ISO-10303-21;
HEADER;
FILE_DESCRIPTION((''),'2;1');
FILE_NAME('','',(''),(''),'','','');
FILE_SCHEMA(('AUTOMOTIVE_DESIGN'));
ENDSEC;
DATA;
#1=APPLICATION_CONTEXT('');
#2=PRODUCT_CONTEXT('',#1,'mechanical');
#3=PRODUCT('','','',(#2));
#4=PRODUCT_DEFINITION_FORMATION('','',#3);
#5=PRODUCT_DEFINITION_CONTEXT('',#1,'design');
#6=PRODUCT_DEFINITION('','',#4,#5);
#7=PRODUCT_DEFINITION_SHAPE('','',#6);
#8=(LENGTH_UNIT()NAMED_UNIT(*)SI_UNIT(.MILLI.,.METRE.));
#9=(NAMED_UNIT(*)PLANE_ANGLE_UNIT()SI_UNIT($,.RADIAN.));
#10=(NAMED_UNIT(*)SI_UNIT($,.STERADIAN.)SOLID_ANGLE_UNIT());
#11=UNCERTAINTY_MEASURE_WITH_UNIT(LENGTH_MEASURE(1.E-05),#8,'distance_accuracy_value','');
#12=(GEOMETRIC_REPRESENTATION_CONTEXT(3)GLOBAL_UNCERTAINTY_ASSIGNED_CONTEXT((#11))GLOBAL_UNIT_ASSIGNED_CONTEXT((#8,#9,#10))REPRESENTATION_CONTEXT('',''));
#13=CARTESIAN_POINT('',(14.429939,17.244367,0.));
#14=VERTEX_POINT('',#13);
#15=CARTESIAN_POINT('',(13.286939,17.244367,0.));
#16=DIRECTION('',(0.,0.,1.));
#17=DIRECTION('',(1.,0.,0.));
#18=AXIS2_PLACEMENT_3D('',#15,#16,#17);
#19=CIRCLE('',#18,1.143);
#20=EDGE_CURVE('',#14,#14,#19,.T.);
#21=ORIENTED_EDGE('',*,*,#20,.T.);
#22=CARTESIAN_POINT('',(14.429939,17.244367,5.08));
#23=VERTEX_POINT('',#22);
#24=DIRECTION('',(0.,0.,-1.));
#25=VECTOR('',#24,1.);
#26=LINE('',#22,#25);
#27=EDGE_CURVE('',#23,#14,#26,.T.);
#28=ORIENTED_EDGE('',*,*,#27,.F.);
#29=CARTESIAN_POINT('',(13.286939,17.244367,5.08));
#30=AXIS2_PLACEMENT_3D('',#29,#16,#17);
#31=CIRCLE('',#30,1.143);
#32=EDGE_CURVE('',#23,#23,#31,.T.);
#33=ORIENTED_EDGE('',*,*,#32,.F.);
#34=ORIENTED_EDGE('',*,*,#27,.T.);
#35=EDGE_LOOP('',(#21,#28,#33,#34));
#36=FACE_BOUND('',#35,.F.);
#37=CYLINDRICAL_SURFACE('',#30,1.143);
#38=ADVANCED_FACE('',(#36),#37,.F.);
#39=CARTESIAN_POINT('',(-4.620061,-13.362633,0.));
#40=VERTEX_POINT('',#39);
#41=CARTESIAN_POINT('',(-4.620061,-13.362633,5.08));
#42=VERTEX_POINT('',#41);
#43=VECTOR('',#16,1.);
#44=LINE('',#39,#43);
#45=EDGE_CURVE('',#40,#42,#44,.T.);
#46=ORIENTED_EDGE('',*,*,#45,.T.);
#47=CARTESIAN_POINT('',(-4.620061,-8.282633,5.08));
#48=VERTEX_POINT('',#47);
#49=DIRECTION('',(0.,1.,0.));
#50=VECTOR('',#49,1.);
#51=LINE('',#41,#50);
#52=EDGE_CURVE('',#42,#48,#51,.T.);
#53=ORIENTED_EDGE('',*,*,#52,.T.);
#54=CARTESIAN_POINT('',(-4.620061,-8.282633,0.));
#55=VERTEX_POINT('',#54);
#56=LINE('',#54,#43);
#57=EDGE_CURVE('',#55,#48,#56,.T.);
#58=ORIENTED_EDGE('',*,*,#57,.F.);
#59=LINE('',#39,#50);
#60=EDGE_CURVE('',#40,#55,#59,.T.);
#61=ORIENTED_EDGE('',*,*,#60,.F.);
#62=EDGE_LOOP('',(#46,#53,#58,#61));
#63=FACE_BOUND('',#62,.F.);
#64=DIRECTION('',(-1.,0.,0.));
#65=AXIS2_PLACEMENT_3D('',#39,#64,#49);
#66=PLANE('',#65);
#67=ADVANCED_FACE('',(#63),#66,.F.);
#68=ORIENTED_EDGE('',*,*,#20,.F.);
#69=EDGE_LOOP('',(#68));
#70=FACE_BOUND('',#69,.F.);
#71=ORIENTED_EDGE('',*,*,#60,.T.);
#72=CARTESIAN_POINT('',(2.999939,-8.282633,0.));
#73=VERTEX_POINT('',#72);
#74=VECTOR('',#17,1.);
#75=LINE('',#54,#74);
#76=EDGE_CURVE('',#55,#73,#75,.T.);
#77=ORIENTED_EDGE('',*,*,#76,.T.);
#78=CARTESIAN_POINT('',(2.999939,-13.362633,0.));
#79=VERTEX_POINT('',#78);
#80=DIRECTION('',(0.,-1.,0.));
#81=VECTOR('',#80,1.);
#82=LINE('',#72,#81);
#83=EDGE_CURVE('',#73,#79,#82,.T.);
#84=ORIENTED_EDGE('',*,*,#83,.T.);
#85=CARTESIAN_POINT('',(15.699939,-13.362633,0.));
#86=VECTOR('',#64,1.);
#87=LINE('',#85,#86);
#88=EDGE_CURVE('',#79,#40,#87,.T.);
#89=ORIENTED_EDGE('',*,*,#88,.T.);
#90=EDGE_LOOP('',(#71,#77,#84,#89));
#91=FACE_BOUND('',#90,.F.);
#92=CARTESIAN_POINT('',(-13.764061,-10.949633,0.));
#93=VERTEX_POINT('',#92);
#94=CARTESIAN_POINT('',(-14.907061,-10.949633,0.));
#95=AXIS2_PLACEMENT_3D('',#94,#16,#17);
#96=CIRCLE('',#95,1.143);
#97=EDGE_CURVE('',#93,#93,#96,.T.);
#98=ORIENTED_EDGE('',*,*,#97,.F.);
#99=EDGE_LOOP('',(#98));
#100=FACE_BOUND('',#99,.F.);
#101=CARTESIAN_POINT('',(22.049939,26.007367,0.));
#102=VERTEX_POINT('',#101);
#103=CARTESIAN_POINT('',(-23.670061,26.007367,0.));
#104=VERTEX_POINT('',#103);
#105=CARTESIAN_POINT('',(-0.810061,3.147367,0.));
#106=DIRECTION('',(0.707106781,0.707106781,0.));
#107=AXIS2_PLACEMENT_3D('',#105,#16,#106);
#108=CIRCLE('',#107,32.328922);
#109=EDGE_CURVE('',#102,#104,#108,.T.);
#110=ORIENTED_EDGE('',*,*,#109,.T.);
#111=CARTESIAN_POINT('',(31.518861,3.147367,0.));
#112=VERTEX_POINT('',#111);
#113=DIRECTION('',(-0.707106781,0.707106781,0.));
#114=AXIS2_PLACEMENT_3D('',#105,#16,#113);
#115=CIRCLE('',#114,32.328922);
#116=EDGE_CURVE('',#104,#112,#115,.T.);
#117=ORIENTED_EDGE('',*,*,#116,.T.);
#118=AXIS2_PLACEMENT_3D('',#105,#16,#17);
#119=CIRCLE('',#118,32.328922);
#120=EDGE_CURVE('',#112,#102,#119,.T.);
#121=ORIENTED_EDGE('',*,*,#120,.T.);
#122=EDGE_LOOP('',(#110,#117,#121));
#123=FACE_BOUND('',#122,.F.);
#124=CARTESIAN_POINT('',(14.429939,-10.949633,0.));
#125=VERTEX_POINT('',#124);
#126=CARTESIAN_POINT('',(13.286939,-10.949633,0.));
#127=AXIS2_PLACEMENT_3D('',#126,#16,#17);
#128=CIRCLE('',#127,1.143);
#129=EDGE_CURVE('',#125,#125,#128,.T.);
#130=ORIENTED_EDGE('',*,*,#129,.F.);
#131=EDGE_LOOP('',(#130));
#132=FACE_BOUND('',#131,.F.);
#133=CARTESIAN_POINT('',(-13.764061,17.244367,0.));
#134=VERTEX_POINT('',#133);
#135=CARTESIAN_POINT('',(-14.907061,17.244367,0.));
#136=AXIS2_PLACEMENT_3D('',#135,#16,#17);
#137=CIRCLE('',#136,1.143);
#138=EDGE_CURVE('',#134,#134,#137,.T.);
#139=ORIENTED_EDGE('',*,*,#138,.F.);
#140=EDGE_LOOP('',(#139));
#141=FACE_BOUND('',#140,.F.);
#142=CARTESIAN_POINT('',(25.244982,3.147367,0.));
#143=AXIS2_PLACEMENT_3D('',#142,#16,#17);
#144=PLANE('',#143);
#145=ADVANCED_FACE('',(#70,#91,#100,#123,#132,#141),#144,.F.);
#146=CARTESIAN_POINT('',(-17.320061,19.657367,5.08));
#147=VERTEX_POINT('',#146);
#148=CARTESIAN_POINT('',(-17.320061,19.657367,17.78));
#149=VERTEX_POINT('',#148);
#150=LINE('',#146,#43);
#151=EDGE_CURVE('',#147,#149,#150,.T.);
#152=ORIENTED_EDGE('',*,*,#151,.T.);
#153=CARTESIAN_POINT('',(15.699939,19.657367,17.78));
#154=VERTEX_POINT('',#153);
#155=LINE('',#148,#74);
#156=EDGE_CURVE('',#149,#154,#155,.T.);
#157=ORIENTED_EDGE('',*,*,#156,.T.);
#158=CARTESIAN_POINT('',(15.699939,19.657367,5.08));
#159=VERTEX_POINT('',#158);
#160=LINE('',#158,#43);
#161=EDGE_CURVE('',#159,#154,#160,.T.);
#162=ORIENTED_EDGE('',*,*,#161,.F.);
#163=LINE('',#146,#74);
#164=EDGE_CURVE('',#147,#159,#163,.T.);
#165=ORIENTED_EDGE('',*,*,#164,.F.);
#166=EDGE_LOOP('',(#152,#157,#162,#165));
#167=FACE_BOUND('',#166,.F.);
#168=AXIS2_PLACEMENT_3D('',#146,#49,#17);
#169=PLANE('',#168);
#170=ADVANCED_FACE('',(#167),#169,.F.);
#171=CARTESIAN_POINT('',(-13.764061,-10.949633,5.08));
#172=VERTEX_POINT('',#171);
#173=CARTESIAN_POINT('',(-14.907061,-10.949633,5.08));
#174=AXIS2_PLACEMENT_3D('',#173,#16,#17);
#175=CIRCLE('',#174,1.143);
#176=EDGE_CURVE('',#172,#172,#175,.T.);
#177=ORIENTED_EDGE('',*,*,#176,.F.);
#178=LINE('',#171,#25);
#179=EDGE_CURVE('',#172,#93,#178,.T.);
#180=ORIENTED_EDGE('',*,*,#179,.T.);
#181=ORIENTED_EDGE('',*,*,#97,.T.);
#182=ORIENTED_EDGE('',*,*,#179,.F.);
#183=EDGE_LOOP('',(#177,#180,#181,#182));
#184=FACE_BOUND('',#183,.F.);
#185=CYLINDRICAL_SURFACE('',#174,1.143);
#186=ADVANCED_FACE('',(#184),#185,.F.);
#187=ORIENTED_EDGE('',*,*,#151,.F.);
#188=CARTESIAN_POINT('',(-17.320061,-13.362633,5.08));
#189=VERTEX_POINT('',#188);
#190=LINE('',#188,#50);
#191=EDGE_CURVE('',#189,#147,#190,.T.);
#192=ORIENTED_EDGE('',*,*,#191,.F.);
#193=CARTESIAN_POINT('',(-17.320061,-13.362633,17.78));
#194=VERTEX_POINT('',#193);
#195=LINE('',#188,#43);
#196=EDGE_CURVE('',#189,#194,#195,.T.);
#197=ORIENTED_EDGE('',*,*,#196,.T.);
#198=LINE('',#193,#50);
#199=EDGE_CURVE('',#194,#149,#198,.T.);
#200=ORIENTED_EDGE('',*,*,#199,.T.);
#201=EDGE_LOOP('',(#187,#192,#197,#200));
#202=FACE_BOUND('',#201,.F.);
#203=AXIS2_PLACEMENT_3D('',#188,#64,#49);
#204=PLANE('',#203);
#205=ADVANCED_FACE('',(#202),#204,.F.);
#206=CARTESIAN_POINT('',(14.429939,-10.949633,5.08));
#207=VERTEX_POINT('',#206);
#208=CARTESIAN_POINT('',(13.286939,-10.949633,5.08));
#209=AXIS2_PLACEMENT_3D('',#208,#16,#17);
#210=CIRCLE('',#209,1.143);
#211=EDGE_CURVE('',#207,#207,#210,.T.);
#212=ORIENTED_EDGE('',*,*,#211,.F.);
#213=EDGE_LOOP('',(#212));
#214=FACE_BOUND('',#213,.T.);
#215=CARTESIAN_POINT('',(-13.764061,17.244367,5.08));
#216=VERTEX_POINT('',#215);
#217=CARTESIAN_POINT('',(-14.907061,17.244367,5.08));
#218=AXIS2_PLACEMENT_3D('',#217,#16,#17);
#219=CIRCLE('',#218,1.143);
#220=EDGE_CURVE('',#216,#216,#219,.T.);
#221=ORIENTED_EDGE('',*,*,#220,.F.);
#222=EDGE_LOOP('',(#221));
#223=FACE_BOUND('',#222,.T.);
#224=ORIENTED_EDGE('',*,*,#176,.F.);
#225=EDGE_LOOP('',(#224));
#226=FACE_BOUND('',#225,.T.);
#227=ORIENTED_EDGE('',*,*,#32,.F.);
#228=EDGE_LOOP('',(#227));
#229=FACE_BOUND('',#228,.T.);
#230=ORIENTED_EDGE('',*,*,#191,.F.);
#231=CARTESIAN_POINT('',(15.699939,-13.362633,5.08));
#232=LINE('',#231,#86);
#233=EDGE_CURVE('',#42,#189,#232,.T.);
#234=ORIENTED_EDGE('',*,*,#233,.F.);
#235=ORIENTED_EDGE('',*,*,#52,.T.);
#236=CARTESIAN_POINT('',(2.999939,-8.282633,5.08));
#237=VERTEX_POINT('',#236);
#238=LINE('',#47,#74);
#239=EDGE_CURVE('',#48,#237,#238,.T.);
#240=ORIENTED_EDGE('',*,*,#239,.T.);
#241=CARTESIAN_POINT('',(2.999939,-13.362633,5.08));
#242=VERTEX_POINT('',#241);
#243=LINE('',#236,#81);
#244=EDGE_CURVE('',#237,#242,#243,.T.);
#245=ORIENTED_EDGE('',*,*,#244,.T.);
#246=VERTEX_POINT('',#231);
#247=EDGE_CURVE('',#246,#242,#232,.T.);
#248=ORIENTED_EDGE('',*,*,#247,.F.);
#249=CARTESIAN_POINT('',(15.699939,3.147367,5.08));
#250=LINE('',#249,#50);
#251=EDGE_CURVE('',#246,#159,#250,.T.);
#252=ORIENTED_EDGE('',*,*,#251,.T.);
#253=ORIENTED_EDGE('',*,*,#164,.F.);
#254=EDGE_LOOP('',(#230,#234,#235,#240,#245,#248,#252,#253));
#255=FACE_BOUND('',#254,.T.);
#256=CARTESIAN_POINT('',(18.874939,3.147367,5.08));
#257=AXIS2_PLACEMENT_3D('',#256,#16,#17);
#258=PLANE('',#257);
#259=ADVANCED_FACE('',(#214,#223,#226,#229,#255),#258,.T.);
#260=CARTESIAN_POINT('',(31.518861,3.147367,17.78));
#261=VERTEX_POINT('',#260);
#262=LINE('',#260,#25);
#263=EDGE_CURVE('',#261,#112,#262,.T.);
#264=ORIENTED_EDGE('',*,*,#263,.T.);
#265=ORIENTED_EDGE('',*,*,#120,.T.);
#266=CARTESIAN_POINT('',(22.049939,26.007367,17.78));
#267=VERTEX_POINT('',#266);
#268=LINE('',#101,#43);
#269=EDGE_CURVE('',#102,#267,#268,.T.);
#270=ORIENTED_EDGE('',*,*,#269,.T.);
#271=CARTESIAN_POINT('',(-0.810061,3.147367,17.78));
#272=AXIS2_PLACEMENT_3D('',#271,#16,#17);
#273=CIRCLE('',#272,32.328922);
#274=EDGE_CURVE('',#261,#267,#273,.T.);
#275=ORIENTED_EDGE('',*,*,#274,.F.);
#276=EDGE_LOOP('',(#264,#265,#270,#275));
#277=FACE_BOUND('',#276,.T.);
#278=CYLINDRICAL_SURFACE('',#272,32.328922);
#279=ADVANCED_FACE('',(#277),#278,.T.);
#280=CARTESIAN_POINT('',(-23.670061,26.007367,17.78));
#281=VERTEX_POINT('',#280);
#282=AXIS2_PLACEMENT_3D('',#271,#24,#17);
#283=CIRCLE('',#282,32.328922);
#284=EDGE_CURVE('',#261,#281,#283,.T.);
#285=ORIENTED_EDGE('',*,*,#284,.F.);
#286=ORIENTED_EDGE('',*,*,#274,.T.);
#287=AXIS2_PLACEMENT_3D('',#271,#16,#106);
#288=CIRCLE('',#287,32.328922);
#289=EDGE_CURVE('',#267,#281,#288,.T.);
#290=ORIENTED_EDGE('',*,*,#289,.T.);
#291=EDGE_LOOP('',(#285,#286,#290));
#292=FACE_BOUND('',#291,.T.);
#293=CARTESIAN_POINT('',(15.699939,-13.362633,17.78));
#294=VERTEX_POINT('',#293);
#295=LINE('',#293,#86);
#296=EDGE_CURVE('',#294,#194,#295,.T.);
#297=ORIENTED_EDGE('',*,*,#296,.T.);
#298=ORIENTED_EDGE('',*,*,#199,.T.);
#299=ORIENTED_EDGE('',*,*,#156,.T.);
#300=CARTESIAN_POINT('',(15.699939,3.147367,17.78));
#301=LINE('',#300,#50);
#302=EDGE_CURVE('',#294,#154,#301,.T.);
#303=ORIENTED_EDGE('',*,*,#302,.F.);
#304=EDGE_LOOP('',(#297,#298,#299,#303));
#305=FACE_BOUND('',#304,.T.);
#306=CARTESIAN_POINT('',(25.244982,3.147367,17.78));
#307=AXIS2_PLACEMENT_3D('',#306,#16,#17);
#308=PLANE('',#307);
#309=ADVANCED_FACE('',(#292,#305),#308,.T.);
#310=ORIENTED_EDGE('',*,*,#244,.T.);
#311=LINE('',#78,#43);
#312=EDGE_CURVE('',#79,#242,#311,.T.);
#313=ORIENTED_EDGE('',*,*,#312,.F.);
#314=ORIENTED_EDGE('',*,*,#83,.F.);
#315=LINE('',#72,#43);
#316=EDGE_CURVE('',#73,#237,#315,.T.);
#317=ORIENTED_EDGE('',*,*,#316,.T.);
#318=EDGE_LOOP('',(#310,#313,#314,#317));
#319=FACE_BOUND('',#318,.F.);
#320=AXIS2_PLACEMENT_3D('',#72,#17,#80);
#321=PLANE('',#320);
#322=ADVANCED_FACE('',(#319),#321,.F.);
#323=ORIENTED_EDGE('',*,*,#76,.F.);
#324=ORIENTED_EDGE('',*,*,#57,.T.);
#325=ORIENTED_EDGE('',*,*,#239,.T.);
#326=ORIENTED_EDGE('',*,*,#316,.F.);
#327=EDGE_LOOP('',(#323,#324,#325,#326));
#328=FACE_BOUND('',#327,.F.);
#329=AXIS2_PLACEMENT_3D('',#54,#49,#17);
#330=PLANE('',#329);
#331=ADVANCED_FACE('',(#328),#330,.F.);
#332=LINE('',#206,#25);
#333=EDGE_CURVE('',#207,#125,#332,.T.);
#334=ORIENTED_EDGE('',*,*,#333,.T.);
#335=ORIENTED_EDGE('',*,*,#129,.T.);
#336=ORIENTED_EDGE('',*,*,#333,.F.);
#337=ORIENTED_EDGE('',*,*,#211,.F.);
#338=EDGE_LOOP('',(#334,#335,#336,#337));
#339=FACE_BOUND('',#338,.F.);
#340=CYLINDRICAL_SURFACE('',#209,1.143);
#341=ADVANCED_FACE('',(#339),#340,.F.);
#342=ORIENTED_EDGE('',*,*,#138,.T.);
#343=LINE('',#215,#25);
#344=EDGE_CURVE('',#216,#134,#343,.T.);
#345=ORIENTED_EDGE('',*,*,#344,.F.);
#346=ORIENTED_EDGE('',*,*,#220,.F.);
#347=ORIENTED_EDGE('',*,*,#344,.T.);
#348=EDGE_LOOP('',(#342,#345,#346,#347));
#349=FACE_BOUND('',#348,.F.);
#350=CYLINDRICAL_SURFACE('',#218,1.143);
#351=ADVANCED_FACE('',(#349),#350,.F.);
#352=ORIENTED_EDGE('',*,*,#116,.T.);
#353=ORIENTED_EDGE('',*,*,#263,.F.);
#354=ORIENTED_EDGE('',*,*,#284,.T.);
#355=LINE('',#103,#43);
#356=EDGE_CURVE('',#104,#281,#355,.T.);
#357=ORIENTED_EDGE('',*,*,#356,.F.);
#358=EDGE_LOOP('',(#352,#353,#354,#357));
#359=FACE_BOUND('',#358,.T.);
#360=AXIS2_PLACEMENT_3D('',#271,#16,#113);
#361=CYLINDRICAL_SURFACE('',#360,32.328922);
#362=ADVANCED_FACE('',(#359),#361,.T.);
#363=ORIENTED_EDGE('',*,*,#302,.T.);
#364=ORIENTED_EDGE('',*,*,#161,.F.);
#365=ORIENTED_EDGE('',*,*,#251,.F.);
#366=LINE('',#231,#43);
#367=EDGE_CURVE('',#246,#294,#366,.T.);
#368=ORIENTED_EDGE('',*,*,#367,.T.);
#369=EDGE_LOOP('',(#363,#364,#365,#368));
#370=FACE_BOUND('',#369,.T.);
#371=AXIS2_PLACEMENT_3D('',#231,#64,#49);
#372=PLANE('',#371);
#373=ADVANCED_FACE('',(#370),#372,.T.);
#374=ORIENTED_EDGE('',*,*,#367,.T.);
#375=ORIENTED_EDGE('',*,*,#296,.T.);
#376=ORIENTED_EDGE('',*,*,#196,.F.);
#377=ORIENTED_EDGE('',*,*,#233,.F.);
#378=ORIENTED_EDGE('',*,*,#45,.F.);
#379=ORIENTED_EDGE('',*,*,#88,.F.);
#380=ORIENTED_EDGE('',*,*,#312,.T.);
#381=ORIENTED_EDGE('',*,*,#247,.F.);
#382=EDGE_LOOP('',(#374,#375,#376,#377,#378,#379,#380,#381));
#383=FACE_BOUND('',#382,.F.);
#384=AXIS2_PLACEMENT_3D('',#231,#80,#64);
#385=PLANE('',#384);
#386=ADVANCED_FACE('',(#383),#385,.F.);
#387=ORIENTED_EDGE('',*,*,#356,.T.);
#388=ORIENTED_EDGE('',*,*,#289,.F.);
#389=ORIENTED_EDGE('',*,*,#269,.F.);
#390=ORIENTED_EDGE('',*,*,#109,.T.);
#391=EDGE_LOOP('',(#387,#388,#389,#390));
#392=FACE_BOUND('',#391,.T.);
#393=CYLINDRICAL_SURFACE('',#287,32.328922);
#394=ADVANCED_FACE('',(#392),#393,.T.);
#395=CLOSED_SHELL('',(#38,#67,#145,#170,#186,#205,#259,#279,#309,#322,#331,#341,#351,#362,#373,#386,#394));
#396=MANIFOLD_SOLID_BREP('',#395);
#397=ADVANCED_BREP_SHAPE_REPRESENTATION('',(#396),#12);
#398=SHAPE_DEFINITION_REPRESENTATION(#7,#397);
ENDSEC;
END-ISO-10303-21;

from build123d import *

# Parameters (mm, degrees)
F1_DEPTH = 5.08
F2_W     = 6.35
F2_H     = 33.02
F3_DEPTH = 5.08
F4_DEPTH = 12.7
F5_R     = 1.143
F6_DEPTH = 25.4
F7_W     = 45.72
F7_H     = 45.72
F7_W_2   = 33.02
F7_H_2   = 33.02
F8_DEPTH = 17.78


with BuildPart() as f1:
    # F0 (on Top) → F1 (new body)
    with BuildSketch(Plane.XY):
        Polygon((15.6999393499, 19.6573674963), (-17.3200606501, 19.6573674963), (-17.3200606501, -13.3626325037), (-4.6200606501, -13.3626325037), (-4.6200606501, -8.2826325037), (2.9999393499, -8.2826325037), (2.9999393499, -13.3626325037), (15.6999393499, -13.3626325037), align=None)
    extrude(amount=F1_DEPTH)

    # F2 (on face) → F3 (join)
    with BuildSketch(Plane.XY.offset(5.08)):
        with Locations((18.8749393499, 3.1473674963)):
            Rectangle(F2_W, F2_H)
        Polygon((-17.3200606501, 26.0073674963), (-17.3200606501, 19.6573674963), (15.6999393499, 19.6573674963), (22.0499393499, 19.6573674963), (22.0499393499, 26.0073674963), align=None)
        Polygon((-4.6200606501, -13.3626325037), (-17.3200606501, -13.3626325037), (-17.3200606501, -19.7126325037), (22.0499393499, -19.7126325037), (22.0499393499, -13.3626325037), (15.6999393499, -13.3626325037), (2.9999393499, -13.3626325037), align=None)
        Polygon((-17.3200606501, -13.3626325037), (-17.3200606501, 19.6573674963), (-17.3200606501, 26.0073674963), (-23.6700606501, 26.0073674963), (-23.6700606501, -19.7126325037), (-17.3200606501, -19.7126325037), align=None)
    extrude(amount=-F3_DEPTH)

    # F2 (on face) → F4 (join)
    with BuildSketch(Plane.XY.offset(5.08)):
        Polygon((-17.3200606501, 26.0073674963), (-17.3200606501, 19.6573674963), (15.6999393499, 19.6573674963), (22.0499393499, 19.6573674963), (22.0499393499, 26.0073674963), align=None)
        with Locations((18.8749393499, 3.1473674963)):
            Rectangle(F2_W, F2_H)
        Polygon((-4.6200606501, -13.3626325037), (-17.3200606501, -13.3626325037), (-17.3200606501, -19.7126325037), (22.0499393499, -19.7126325037), (22.0499393499, -13.3626325037), (15.6999393499, -13.3626325037), (2.9999393499, -13.3626325037), align=None)
        Polygon((-17.3200606501, -13.3626325037), (-17.3200606501, 19.6573674963), (-17.3200606501, 26.0073674963), (-23.6700606501, 26.0073674963), (-23.6700606501, -19.7126325037), (-17.3200606501, -19.7126325037), align=None)
    extrude(amount=F4_DEPTH)

    # F5 (on face) → F6 (cut)
    with BuildSketch(Plane.XY.offset(5.08)):
        with Locations((13.2869393499, 17.2443674963)):
            Circle(F5_R)
        with Locations((-14.9070606501, -10.9496325037)):
            Circle(F5_R)
        with Locations((13.2869393499, -10.9496325037)):
            Circle(F5_R)
        with Locations((-14.9070606501, 17.2443674963)):
            Circle(F5_R)
    extrude(amount=-F6_DEPTH, mode=Mode.SUBTRACT)

    # F7 (on face) → F8 (join)
    with BuildSketch(Plane.XY.offset(17.78)):
        with BuildLine():
            ThreePointArc((22.0499393499, -19.7126325037), (29.057968727, -9.224375353), (31.5188613857, 3.1473674963))
            ThreePointArc((31.5188613857, 3.1473674963), (29.057968727, 15.5191103457), (22.0499393499, 26.0073674963))
            Line((22.0499393499, 26.0073674963), (22.0499393499, -19.7126325037))
        make_face()
        with BuildLine():
            Line((-23.6700606501, 26.0073674963), (22.0499393499, 26.0073674963))
            ThreePointArc((22.0499393499, 26.0073674963), (-0.8100606501, 35.4762895322), (-23.6700606501, 26.0073674963))
        make_face()
        with Locations((-0.8100606501, 3.1473674963)):
            Rectangle(F7_W, F7_H)
        with Locations((-0.8100606501, 3.1473674963)):
            Rectangle(F7_W_2, F7_H_2, mode=Mode.SUBTRACT)
        with BuildLine():
            ThreePointArc((-23.6700606501, -19.7126325037), (-0.8100606501, -29.1815545395), (22.0499393499, -19.7126325037))
            Line((22.0499393499, -19.7126325037), (-23.6700606501, -19.7126325037))
        make_face()
        with BuildLine():
            Line((-23.6700606501, -19.7126325037), (-23.6700606501, 26.0073674963))
            ThreePointArc((-23.6700606501, 26.0073674963), (-33.138982686, 3.1473674963), (-23.6700606501, -19.7126325037))
        make_face()
    extrude(amount=-F8_DEPTH)


solid = f1.part
